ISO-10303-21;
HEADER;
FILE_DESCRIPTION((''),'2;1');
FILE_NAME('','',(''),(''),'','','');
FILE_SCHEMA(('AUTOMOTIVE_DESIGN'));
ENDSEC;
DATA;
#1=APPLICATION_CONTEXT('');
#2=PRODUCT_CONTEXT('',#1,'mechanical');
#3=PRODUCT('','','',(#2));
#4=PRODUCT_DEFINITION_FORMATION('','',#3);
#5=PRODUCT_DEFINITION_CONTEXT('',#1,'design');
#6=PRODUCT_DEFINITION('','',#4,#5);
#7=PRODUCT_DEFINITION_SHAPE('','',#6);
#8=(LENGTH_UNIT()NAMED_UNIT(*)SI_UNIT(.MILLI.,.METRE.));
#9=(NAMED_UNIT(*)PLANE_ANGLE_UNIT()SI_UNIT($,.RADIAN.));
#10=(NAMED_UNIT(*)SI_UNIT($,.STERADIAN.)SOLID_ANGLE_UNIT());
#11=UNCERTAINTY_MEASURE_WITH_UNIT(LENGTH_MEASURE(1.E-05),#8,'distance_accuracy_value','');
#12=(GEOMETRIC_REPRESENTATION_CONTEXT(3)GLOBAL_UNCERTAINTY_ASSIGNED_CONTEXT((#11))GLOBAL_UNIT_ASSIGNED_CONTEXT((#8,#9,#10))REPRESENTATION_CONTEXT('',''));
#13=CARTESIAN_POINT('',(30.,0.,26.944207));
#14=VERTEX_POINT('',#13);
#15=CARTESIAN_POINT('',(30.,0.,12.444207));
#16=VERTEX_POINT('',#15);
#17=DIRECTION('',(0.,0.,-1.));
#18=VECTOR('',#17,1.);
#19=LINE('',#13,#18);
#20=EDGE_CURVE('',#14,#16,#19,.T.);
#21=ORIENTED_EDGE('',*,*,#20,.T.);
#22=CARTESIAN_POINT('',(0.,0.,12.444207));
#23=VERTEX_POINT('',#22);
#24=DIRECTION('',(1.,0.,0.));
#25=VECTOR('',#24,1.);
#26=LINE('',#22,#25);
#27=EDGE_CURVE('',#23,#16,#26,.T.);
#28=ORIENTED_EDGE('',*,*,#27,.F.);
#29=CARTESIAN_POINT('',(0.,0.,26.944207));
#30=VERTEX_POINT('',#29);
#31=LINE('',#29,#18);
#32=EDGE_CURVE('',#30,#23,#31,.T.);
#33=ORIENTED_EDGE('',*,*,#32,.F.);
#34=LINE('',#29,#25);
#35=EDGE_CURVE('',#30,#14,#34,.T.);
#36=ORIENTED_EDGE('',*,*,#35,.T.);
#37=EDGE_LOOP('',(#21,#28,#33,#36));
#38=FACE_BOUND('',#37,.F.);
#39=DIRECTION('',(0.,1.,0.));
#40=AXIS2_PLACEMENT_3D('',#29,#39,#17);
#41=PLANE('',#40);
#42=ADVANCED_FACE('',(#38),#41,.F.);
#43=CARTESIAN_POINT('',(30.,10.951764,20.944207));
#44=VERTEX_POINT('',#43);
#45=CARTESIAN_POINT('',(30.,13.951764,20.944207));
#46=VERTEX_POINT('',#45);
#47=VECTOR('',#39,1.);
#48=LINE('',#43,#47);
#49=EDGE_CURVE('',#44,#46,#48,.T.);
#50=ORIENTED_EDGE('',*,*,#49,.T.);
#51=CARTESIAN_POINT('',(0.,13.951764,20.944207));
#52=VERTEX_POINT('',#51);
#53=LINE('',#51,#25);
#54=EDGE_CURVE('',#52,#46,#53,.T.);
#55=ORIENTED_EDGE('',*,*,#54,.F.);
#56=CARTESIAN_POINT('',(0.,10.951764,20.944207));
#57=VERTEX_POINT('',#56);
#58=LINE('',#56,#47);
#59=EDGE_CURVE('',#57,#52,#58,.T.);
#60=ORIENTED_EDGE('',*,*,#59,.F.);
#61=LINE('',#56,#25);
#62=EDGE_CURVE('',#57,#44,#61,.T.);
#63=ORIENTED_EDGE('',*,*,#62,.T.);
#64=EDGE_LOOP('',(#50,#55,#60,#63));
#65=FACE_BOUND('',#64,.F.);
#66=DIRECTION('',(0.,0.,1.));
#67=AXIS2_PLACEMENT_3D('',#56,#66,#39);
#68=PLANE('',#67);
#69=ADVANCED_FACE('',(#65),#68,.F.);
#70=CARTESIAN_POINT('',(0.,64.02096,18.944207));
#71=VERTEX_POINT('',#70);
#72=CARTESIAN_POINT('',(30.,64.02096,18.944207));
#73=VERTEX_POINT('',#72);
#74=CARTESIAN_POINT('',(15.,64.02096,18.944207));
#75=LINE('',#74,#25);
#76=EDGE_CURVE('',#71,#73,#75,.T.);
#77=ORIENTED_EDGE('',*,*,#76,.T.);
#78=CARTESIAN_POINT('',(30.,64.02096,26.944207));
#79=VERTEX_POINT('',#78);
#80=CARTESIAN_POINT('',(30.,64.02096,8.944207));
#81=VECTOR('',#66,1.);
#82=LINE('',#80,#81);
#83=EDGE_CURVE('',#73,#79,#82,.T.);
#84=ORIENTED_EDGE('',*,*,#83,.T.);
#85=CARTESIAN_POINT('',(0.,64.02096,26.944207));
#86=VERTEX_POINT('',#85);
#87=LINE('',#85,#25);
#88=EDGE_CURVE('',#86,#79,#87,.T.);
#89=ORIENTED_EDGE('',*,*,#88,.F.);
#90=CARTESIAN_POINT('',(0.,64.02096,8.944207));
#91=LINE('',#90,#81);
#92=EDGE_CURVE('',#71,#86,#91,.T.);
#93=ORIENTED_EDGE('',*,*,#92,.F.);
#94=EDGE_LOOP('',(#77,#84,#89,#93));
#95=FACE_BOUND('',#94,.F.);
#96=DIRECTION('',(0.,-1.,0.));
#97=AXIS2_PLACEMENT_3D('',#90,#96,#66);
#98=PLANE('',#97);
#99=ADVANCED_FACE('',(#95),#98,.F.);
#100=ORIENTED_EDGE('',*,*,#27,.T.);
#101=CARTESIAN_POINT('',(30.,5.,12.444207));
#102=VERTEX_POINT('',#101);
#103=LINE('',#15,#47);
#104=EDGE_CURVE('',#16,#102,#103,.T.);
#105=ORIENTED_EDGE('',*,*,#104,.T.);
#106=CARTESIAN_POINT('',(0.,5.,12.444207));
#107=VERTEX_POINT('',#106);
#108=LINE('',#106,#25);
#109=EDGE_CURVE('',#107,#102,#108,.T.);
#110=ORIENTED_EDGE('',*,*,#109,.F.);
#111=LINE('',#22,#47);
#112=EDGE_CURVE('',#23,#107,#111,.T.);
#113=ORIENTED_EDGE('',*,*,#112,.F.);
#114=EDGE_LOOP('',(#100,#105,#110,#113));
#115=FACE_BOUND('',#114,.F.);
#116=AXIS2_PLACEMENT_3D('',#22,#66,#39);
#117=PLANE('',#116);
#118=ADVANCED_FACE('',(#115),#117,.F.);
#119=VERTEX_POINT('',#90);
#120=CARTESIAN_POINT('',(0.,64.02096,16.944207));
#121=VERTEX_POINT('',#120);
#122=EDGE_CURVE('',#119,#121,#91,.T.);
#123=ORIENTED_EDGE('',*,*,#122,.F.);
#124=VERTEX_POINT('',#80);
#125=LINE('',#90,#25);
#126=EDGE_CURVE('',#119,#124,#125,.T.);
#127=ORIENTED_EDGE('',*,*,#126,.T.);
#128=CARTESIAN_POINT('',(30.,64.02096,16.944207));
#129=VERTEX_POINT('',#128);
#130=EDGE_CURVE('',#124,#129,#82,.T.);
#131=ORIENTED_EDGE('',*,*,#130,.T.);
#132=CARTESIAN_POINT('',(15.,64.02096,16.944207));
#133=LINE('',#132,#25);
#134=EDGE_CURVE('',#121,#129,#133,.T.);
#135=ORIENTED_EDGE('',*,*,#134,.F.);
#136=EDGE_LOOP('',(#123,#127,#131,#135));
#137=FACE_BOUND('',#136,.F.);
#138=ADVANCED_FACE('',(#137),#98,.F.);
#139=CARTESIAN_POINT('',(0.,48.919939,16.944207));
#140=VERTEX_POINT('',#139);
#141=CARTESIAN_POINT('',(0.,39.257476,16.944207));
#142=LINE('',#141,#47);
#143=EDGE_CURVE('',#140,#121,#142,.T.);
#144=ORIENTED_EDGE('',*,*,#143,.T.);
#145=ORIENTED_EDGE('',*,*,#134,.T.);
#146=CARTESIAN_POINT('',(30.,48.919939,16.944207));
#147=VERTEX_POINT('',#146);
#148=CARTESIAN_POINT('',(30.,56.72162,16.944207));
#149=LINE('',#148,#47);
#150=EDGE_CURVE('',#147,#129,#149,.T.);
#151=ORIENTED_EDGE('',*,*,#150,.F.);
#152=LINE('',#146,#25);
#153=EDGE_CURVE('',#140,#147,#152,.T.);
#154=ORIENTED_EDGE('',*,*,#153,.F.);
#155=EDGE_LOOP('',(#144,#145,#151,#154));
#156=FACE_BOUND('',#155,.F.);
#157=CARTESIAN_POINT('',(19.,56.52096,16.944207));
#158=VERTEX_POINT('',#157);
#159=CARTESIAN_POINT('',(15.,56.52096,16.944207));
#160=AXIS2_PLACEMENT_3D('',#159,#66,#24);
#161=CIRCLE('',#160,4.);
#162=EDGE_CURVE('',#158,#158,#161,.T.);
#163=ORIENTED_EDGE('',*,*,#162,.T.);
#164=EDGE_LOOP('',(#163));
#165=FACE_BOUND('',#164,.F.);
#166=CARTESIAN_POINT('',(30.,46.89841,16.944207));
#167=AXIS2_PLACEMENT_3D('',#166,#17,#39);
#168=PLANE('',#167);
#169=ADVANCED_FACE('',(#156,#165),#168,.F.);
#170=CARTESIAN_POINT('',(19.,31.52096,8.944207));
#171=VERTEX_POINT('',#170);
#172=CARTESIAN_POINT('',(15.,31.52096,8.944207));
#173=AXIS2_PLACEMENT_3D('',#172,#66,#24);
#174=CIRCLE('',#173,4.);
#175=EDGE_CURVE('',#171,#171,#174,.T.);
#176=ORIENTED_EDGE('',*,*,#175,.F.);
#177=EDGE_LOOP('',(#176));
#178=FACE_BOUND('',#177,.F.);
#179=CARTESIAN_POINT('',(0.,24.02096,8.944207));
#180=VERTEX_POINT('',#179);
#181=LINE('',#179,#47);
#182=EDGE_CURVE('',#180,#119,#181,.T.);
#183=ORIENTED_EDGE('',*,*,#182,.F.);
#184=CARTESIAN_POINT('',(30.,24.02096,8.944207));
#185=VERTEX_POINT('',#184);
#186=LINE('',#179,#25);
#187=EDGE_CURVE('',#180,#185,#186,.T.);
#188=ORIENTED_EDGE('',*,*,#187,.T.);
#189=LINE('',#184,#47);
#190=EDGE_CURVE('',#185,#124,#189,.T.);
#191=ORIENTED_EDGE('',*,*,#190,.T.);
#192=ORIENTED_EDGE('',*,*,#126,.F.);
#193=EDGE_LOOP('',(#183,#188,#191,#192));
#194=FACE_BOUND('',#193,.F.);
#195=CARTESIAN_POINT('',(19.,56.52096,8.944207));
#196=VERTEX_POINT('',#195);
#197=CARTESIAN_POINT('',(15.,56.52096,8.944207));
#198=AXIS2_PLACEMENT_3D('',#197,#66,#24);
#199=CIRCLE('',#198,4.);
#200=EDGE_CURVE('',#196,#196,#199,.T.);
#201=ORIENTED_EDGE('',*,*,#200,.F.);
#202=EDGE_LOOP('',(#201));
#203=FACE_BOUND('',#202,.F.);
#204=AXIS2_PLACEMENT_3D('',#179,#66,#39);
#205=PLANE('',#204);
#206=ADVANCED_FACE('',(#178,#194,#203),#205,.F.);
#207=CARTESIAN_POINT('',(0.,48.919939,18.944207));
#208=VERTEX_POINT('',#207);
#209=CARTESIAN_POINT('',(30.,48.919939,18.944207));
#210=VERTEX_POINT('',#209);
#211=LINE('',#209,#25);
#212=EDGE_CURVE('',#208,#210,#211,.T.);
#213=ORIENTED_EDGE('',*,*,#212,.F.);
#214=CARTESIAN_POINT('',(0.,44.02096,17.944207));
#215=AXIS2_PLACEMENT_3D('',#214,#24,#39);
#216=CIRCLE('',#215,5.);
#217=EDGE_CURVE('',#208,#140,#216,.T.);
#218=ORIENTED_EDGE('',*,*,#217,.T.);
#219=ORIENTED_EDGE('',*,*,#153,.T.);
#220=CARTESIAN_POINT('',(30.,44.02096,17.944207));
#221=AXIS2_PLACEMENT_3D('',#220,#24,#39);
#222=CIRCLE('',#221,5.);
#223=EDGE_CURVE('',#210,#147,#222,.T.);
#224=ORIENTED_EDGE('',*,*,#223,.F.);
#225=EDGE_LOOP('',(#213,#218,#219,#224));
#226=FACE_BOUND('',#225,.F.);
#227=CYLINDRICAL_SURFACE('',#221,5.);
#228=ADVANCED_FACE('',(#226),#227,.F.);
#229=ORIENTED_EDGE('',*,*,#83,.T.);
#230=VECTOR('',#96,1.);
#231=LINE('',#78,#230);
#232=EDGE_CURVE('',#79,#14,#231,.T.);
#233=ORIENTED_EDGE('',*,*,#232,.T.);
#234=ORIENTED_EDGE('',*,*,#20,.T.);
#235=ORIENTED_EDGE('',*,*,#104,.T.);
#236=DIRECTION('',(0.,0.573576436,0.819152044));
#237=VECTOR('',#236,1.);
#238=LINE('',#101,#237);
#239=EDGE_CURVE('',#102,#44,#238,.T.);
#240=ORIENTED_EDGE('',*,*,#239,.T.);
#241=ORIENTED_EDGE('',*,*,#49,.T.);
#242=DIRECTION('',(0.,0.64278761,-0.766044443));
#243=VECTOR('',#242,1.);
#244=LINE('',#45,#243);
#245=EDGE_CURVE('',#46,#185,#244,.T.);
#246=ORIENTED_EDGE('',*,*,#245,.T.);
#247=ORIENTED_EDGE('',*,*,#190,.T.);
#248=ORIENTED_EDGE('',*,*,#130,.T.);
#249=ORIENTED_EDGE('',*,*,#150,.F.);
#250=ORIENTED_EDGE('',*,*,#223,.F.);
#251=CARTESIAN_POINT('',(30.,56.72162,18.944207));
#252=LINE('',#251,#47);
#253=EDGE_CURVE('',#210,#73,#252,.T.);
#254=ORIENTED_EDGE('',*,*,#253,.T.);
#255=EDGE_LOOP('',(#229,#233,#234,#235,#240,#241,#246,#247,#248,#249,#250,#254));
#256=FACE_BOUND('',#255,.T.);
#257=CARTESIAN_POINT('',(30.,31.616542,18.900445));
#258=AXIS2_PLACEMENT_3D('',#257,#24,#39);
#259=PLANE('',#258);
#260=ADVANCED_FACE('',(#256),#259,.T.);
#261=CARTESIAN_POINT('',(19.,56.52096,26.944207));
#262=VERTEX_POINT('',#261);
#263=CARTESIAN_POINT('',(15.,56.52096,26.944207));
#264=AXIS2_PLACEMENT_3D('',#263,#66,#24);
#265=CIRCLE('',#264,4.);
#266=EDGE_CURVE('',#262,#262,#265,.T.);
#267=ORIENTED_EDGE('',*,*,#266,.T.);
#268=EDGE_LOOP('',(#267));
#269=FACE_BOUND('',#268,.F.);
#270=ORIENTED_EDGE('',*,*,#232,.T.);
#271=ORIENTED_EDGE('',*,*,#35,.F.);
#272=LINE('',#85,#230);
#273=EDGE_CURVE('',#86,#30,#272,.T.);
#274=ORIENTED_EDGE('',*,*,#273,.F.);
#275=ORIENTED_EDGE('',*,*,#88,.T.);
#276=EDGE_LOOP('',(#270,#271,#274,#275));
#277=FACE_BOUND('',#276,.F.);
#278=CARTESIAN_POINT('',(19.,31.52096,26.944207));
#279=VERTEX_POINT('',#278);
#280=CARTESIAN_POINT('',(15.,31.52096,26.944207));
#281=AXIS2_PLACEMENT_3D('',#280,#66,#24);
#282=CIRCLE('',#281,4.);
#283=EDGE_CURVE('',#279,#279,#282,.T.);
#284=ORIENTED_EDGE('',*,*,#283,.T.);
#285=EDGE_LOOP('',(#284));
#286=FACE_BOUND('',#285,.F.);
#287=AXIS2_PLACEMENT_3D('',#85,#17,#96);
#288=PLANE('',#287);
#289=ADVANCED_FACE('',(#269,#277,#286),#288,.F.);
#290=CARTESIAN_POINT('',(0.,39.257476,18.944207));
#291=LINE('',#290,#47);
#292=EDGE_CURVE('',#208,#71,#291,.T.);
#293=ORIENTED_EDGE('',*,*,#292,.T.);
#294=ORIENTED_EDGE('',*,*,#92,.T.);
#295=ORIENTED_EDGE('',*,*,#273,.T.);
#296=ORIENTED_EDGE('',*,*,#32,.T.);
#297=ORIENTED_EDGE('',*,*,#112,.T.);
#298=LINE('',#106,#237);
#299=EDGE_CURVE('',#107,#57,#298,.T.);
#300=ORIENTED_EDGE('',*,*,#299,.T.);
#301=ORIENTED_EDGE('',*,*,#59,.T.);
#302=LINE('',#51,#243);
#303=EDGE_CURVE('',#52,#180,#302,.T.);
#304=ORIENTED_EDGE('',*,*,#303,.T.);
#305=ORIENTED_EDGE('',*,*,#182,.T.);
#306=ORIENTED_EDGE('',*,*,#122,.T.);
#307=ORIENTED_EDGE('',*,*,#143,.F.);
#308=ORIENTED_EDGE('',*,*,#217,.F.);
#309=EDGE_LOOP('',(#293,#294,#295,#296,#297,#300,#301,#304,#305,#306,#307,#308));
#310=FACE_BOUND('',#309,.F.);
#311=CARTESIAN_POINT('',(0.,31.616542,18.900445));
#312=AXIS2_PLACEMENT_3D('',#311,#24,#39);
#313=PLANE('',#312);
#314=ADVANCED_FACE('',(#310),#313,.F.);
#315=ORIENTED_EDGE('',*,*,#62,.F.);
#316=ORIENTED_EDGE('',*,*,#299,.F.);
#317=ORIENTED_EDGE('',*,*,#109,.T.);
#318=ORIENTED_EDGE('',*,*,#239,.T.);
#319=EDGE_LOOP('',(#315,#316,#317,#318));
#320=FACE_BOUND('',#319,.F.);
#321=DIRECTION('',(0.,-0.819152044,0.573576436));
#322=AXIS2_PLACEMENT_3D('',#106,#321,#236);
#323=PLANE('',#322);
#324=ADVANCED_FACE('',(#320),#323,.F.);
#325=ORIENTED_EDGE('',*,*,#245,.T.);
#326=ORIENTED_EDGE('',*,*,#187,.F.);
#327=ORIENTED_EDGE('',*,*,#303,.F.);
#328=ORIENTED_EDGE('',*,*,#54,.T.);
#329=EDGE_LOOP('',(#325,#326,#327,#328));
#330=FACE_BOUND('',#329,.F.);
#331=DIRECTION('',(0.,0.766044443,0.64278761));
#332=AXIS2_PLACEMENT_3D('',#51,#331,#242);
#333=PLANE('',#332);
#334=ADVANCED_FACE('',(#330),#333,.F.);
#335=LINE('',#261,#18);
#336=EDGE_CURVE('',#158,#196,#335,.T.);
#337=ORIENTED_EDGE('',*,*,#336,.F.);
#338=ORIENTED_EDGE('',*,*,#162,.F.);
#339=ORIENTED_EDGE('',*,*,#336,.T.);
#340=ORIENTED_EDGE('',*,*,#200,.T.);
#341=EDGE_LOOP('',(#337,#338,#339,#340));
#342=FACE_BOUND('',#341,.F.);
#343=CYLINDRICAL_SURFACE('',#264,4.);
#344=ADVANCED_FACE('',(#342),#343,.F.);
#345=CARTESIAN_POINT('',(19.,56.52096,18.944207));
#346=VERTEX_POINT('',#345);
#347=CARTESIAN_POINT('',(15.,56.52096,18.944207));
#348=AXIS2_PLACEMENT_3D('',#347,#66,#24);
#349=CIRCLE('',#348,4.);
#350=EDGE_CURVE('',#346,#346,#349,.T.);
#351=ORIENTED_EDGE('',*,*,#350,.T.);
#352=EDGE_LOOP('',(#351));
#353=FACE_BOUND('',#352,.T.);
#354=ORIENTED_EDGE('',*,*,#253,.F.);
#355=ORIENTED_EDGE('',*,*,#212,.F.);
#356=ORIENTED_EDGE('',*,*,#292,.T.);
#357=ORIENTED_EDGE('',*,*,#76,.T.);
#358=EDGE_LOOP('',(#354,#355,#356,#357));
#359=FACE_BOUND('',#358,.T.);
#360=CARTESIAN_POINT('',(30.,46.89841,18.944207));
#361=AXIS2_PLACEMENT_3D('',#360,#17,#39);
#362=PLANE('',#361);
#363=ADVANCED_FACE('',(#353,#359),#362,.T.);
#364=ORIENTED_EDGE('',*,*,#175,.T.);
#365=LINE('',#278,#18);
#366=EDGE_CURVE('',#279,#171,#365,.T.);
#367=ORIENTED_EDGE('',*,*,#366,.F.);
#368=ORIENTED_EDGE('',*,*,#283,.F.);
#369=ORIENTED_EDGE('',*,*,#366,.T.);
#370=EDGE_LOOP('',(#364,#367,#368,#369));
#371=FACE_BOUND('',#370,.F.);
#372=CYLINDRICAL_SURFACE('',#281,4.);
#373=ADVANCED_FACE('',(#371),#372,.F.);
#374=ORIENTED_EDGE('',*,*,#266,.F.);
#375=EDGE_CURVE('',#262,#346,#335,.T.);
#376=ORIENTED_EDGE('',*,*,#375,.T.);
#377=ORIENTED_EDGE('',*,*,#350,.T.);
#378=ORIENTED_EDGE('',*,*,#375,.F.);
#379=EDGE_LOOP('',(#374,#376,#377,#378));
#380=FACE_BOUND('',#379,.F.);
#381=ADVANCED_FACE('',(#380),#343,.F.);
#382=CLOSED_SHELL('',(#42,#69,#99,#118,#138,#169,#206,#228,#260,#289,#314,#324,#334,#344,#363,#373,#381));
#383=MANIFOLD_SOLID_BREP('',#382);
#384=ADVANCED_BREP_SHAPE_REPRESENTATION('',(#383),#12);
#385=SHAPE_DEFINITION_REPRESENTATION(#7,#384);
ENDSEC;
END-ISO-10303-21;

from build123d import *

# Parameters (mm, degrees)
F1_DEPTH = 30
F3_W     = 19.6464200949
F3_H     = 2
F4_DEPTH = 30.001
F2_R     = 5
F5_DEPTH = 30.001
F6_R     = 4
F7_DEPTH = 18.001
F8_DEPTH = 30.001


# Not quite as in the source:
# - a feature names something its author has since deleted; it is built from what else it names


with BuildPart() as f1:
    # F0 (on Right) → F1 (new body)
    with BuildSketch(Plane.YZ):
        Polygon((13.9517640748, 20.9442070276), (24.0209596489, 8.9442070276), (64.0209596489, 8.9442070276), (64.0209596489, 26.9442070276), (0, 26.9442070276), (0, 12.4442070276), (5, 12.4442070276), (10.9517640748, 20.9442070276), align=None)
    extrude(amount=F1_DEPTH)

    # F3 (on face) → F4 (cut, through all)
    with BuildSketch(Plane.YZ.offset(30)):
        with Locations((56.7216197717, 17.9442070276)):
            Rectangle(F3_W, F3_H)
    extrude(amount=-F4_DEPTH, mode=Mode.SUBTRACT)

    # F2 (on face) → F5 (cut, through all)
    with BuildSketch(Plane.YZ.offset(30)):
        with Locations((44.0209596489, 17.9442070276)):
            Circle(F2_R)
    extrude(amount=-F5_DEPTH, mode=Mode.SUBTRACT)

    # F6 (on face) → F7 (cut, through all)
    with BuildSketch(Plane.XY.offset(26.9442070276)):
        with Locations((15, 31.5209596489)):
            Circle(F6_R)
        with Locations((15, 56.5209596489)):
            Circle(F6_R)
    extrude(amount=-F7_DEPTH, mode=Mode.SUBTRACT)

    # F2 (on face) → F8 (cut, through all)
    with BuildSketch(Plane.YZ.offset(30)):
        with Locations((44.0209596489, 17.9442070276)):
            Circle(F2_R)
    extrude(amount=-F8_DEPTH, mode=Mode.SUBTRACT)


solid = f1.part
